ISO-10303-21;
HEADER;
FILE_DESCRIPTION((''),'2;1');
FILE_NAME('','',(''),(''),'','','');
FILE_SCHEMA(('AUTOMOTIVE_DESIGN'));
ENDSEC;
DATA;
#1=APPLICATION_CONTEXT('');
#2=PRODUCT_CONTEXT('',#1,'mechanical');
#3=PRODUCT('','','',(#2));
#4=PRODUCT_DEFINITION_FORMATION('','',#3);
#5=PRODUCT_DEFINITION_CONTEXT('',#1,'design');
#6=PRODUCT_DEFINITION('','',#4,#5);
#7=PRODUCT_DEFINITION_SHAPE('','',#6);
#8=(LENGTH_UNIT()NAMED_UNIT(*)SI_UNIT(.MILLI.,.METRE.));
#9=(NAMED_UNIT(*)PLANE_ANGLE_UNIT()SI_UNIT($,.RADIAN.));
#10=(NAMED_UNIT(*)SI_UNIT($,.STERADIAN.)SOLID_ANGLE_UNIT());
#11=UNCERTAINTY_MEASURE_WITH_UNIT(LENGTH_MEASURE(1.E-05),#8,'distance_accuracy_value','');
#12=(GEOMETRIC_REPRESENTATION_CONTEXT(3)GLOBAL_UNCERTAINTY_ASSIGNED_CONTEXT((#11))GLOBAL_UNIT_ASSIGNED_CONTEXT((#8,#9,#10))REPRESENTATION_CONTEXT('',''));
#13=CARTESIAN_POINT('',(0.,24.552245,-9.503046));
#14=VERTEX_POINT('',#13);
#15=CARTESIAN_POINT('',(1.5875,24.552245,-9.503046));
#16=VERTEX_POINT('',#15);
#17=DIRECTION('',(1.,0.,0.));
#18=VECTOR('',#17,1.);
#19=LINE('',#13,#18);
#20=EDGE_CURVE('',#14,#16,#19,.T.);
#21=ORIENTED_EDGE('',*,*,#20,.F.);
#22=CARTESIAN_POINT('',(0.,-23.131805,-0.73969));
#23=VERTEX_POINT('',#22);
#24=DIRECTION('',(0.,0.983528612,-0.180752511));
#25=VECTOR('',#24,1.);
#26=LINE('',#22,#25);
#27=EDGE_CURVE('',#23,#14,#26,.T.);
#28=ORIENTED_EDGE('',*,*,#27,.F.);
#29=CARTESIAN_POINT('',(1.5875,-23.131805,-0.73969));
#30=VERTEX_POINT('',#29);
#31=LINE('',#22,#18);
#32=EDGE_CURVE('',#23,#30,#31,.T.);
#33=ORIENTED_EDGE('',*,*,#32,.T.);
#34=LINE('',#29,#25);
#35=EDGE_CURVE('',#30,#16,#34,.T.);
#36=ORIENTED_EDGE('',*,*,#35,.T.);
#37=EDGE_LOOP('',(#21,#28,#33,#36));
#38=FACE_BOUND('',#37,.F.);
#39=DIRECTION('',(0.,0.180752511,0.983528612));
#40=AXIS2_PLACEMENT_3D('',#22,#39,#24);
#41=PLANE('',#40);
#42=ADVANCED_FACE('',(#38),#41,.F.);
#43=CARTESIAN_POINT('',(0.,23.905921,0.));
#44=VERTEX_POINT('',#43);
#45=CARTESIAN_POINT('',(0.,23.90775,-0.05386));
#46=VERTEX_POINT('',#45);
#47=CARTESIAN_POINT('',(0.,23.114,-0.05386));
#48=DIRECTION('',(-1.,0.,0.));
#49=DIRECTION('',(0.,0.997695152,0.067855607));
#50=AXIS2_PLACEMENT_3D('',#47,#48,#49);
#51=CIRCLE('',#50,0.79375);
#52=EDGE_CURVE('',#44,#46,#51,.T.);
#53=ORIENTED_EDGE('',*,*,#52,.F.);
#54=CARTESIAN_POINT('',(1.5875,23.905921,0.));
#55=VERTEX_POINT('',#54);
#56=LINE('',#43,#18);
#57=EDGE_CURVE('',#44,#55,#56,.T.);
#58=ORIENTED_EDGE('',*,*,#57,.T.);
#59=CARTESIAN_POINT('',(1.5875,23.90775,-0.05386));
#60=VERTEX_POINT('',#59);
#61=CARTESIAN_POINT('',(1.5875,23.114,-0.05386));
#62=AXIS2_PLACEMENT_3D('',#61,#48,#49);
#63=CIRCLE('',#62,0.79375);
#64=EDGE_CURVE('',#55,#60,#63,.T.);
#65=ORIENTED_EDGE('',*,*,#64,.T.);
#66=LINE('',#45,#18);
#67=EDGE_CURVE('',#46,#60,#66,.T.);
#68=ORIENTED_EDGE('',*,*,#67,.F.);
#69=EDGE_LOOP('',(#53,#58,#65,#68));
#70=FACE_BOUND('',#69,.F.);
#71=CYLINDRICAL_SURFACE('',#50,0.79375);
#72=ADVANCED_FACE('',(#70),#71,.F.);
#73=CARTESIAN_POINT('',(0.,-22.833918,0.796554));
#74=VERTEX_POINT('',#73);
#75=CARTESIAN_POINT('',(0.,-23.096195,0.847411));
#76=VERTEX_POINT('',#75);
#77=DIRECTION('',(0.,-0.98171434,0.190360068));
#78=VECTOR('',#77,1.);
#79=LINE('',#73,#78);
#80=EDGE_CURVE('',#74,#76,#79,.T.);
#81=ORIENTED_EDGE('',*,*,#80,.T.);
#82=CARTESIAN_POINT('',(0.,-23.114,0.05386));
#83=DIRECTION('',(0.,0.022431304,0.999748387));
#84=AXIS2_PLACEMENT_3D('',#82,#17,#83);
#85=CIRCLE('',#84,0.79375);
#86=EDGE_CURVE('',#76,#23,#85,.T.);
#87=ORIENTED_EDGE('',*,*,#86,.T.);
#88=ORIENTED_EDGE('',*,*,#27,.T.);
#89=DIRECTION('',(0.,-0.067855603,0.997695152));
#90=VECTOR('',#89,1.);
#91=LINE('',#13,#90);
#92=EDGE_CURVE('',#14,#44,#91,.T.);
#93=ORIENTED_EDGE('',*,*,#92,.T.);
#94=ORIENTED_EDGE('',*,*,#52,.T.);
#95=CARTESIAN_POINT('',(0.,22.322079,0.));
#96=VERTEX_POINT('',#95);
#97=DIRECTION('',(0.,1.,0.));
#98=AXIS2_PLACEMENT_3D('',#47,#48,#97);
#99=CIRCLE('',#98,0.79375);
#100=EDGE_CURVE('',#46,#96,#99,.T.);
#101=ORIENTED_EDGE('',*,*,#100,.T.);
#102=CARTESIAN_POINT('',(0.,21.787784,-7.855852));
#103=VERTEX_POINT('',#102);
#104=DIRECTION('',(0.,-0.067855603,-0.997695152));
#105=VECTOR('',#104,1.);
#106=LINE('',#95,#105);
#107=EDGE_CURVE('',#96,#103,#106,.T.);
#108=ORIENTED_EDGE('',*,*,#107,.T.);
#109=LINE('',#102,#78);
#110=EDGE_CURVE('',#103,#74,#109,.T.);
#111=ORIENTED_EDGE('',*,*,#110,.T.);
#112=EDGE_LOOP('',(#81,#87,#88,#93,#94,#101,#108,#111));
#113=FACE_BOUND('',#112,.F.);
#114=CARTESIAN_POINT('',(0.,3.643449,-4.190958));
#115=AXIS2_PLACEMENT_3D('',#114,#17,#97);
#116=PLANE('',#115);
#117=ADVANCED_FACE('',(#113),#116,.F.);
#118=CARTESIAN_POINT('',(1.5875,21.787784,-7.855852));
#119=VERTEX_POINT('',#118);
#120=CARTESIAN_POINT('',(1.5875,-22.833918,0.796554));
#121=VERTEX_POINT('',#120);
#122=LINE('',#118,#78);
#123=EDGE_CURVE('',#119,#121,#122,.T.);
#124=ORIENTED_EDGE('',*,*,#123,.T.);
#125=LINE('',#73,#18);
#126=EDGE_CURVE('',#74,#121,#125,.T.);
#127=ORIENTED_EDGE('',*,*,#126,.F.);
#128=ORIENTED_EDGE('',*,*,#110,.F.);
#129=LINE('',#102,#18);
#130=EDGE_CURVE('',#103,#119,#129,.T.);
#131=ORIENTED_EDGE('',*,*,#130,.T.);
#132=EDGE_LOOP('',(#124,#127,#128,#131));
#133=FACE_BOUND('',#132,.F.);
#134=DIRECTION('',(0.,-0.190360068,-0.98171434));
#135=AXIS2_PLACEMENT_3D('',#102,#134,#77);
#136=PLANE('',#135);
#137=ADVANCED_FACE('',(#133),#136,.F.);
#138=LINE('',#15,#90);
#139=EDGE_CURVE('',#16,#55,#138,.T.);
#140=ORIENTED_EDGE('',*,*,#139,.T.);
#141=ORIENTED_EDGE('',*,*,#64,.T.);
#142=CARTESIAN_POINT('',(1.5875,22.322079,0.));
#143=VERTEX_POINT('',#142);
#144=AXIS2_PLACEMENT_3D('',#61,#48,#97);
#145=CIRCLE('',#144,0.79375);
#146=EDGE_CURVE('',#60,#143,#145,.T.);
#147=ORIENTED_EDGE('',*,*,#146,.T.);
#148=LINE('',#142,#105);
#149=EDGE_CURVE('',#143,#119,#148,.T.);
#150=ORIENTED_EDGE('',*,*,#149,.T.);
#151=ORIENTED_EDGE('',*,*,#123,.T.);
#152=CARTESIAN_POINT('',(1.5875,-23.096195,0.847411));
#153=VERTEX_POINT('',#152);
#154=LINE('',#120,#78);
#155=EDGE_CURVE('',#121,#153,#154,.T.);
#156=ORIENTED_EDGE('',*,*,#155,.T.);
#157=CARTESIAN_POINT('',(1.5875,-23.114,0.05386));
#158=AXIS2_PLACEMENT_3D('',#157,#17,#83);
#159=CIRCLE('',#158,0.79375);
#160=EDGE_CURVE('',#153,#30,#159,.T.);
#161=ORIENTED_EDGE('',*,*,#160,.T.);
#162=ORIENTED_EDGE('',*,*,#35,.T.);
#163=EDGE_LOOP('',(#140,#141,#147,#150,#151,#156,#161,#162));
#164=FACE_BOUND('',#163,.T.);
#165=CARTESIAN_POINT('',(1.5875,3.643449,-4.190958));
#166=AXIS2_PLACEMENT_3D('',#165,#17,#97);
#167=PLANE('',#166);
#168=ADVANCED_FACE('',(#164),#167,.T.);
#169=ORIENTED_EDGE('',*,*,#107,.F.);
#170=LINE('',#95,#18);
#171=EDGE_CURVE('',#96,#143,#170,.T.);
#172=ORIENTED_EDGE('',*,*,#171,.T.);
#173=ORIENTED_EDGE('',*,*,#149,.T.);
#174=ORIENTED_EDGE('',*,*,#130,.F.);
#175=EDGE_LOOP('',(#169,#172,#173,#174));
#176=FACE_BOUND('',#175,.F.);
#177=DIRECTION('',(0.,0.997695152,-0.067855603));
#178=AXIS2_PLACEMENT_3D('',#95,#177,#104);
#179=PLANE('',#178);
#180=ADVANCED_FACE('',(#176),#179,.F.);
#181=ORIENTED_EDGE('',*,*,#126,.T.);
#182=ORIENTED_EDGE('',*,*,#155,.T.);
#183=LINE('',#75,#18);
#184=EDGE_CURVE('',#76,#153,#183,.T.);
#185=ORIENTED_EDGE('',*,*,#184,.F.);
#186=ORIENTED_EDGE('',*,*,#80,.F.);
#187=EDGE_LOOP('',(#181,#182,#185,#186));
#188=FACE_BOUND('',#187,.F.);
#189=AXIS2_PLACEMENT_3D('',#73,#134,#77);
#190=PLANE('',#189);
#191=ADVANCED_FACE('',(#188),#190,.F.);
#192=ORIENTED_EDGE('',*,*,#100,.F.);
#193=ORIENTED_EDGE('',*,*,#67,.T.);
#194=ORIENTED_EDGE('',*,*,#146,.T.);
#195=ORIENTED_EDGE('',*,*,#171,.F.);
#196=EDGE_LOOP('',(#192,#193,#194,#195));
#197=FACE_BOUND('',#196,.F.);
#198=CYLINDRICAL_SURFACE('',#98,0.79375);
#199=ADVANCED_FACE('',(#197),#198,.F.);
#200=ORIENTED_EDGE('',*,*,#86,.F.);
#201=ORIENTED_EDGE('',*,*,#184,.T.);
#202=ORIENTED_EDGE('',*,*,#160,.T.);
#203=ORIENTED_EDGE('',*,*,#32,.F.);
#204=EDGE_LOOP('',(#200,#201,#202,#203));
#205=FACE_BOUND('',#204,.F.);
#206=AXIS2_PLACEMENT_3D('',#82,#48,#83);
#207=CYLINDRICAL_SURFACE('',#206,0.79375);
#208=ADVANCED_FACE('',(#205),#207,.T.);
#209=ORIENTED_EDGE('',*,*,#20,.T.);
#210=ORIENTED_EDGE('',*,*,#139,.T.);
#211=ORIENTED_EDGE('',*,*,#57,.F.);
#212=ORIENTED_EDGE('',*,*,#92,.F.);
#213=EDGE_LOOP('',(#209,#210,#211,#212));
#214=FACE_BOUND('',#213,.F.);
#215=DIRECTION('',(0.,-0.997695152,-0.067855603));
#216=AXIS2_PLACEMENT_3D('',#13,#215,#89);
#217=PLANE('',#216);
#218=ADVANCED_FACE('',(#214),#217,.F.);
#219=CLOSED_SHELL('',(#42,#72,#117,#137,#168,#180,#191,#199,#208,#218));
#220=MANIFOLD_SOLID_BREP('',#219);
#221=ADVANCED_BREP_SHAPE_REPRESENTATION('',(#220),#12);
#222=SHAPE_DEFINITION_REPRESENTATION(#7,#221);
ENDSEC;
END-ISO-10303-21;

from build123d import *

# Parameters (mm, degrees)
F1_DEPTH = 1.5875


# Not quite as in the source:
# - a feature names something its author has since deleted; it is built from what else it names


with BuildPart() as f1:
    # F0 (on Right) → F1 (new body)
    with BuildSketch(Plane.YZ):
        with BuildLine():
            ThreePointArc((-22.32025, 0.0538603849), (-22.5590646592, -0.5136656763), (-23.1318048474, -0.739689897))
            Line((-23.1318048474, -0.739689897), (24.5522451458, -9.5030463267))
            Line((24.5522451458, -9.5030463267), (23.9059205272, 0))
            ThreePointArc((23.9059205272, 0), (23.9072925, -0.0269146615), (23.90775, -0.0538603849))
            ThreePointArc((23.90775, -0.0538603849), (23.0870542766, -0.8471528848), (22.3220794728, 0))
            Line((22.3220794728, 0), (21.7877844548, -7.8558516301))
            Line((21.7877844548, -7.8558516301), (-22.8339183638, 0.796553686))
            ThreePointArc((-22.8339183638, 0.796553686), (-22.461177719, 0.5053713282), (-22.32025, 0.0538603849))
        make_face()
        with BuildLine():
            Line((-23.0961951526, 0.8474106668), (-23.1318048474, -0.739689897))
            ThreePointArc((-23.1318048474, -0.739689897), (-22.5590646592, -0.5136656763), (-22.32025, 0.0538603849))
            ThreePointArc((-22.32025, 0.0538603849), (-22.461177719, 0.5053713282), (-22.8339183638, 0.796553686))
            Line((-22.8339183638, 0.796553686), (-23.0961951526, 0.8474106668))
        make_face()
        with BuildLine():
            ThreePointArc((-23.0961951526, 0.8474106668), (-23.9075502819, 0.0716652323), (-23.1318048474, -0.739689897))
            Line((-23.1318048474, -0.739689897), (-23.0961951526, 0.8474106668))
        make_face()
    extrude(amount=F1_DEPTH)


solid = f1.part
